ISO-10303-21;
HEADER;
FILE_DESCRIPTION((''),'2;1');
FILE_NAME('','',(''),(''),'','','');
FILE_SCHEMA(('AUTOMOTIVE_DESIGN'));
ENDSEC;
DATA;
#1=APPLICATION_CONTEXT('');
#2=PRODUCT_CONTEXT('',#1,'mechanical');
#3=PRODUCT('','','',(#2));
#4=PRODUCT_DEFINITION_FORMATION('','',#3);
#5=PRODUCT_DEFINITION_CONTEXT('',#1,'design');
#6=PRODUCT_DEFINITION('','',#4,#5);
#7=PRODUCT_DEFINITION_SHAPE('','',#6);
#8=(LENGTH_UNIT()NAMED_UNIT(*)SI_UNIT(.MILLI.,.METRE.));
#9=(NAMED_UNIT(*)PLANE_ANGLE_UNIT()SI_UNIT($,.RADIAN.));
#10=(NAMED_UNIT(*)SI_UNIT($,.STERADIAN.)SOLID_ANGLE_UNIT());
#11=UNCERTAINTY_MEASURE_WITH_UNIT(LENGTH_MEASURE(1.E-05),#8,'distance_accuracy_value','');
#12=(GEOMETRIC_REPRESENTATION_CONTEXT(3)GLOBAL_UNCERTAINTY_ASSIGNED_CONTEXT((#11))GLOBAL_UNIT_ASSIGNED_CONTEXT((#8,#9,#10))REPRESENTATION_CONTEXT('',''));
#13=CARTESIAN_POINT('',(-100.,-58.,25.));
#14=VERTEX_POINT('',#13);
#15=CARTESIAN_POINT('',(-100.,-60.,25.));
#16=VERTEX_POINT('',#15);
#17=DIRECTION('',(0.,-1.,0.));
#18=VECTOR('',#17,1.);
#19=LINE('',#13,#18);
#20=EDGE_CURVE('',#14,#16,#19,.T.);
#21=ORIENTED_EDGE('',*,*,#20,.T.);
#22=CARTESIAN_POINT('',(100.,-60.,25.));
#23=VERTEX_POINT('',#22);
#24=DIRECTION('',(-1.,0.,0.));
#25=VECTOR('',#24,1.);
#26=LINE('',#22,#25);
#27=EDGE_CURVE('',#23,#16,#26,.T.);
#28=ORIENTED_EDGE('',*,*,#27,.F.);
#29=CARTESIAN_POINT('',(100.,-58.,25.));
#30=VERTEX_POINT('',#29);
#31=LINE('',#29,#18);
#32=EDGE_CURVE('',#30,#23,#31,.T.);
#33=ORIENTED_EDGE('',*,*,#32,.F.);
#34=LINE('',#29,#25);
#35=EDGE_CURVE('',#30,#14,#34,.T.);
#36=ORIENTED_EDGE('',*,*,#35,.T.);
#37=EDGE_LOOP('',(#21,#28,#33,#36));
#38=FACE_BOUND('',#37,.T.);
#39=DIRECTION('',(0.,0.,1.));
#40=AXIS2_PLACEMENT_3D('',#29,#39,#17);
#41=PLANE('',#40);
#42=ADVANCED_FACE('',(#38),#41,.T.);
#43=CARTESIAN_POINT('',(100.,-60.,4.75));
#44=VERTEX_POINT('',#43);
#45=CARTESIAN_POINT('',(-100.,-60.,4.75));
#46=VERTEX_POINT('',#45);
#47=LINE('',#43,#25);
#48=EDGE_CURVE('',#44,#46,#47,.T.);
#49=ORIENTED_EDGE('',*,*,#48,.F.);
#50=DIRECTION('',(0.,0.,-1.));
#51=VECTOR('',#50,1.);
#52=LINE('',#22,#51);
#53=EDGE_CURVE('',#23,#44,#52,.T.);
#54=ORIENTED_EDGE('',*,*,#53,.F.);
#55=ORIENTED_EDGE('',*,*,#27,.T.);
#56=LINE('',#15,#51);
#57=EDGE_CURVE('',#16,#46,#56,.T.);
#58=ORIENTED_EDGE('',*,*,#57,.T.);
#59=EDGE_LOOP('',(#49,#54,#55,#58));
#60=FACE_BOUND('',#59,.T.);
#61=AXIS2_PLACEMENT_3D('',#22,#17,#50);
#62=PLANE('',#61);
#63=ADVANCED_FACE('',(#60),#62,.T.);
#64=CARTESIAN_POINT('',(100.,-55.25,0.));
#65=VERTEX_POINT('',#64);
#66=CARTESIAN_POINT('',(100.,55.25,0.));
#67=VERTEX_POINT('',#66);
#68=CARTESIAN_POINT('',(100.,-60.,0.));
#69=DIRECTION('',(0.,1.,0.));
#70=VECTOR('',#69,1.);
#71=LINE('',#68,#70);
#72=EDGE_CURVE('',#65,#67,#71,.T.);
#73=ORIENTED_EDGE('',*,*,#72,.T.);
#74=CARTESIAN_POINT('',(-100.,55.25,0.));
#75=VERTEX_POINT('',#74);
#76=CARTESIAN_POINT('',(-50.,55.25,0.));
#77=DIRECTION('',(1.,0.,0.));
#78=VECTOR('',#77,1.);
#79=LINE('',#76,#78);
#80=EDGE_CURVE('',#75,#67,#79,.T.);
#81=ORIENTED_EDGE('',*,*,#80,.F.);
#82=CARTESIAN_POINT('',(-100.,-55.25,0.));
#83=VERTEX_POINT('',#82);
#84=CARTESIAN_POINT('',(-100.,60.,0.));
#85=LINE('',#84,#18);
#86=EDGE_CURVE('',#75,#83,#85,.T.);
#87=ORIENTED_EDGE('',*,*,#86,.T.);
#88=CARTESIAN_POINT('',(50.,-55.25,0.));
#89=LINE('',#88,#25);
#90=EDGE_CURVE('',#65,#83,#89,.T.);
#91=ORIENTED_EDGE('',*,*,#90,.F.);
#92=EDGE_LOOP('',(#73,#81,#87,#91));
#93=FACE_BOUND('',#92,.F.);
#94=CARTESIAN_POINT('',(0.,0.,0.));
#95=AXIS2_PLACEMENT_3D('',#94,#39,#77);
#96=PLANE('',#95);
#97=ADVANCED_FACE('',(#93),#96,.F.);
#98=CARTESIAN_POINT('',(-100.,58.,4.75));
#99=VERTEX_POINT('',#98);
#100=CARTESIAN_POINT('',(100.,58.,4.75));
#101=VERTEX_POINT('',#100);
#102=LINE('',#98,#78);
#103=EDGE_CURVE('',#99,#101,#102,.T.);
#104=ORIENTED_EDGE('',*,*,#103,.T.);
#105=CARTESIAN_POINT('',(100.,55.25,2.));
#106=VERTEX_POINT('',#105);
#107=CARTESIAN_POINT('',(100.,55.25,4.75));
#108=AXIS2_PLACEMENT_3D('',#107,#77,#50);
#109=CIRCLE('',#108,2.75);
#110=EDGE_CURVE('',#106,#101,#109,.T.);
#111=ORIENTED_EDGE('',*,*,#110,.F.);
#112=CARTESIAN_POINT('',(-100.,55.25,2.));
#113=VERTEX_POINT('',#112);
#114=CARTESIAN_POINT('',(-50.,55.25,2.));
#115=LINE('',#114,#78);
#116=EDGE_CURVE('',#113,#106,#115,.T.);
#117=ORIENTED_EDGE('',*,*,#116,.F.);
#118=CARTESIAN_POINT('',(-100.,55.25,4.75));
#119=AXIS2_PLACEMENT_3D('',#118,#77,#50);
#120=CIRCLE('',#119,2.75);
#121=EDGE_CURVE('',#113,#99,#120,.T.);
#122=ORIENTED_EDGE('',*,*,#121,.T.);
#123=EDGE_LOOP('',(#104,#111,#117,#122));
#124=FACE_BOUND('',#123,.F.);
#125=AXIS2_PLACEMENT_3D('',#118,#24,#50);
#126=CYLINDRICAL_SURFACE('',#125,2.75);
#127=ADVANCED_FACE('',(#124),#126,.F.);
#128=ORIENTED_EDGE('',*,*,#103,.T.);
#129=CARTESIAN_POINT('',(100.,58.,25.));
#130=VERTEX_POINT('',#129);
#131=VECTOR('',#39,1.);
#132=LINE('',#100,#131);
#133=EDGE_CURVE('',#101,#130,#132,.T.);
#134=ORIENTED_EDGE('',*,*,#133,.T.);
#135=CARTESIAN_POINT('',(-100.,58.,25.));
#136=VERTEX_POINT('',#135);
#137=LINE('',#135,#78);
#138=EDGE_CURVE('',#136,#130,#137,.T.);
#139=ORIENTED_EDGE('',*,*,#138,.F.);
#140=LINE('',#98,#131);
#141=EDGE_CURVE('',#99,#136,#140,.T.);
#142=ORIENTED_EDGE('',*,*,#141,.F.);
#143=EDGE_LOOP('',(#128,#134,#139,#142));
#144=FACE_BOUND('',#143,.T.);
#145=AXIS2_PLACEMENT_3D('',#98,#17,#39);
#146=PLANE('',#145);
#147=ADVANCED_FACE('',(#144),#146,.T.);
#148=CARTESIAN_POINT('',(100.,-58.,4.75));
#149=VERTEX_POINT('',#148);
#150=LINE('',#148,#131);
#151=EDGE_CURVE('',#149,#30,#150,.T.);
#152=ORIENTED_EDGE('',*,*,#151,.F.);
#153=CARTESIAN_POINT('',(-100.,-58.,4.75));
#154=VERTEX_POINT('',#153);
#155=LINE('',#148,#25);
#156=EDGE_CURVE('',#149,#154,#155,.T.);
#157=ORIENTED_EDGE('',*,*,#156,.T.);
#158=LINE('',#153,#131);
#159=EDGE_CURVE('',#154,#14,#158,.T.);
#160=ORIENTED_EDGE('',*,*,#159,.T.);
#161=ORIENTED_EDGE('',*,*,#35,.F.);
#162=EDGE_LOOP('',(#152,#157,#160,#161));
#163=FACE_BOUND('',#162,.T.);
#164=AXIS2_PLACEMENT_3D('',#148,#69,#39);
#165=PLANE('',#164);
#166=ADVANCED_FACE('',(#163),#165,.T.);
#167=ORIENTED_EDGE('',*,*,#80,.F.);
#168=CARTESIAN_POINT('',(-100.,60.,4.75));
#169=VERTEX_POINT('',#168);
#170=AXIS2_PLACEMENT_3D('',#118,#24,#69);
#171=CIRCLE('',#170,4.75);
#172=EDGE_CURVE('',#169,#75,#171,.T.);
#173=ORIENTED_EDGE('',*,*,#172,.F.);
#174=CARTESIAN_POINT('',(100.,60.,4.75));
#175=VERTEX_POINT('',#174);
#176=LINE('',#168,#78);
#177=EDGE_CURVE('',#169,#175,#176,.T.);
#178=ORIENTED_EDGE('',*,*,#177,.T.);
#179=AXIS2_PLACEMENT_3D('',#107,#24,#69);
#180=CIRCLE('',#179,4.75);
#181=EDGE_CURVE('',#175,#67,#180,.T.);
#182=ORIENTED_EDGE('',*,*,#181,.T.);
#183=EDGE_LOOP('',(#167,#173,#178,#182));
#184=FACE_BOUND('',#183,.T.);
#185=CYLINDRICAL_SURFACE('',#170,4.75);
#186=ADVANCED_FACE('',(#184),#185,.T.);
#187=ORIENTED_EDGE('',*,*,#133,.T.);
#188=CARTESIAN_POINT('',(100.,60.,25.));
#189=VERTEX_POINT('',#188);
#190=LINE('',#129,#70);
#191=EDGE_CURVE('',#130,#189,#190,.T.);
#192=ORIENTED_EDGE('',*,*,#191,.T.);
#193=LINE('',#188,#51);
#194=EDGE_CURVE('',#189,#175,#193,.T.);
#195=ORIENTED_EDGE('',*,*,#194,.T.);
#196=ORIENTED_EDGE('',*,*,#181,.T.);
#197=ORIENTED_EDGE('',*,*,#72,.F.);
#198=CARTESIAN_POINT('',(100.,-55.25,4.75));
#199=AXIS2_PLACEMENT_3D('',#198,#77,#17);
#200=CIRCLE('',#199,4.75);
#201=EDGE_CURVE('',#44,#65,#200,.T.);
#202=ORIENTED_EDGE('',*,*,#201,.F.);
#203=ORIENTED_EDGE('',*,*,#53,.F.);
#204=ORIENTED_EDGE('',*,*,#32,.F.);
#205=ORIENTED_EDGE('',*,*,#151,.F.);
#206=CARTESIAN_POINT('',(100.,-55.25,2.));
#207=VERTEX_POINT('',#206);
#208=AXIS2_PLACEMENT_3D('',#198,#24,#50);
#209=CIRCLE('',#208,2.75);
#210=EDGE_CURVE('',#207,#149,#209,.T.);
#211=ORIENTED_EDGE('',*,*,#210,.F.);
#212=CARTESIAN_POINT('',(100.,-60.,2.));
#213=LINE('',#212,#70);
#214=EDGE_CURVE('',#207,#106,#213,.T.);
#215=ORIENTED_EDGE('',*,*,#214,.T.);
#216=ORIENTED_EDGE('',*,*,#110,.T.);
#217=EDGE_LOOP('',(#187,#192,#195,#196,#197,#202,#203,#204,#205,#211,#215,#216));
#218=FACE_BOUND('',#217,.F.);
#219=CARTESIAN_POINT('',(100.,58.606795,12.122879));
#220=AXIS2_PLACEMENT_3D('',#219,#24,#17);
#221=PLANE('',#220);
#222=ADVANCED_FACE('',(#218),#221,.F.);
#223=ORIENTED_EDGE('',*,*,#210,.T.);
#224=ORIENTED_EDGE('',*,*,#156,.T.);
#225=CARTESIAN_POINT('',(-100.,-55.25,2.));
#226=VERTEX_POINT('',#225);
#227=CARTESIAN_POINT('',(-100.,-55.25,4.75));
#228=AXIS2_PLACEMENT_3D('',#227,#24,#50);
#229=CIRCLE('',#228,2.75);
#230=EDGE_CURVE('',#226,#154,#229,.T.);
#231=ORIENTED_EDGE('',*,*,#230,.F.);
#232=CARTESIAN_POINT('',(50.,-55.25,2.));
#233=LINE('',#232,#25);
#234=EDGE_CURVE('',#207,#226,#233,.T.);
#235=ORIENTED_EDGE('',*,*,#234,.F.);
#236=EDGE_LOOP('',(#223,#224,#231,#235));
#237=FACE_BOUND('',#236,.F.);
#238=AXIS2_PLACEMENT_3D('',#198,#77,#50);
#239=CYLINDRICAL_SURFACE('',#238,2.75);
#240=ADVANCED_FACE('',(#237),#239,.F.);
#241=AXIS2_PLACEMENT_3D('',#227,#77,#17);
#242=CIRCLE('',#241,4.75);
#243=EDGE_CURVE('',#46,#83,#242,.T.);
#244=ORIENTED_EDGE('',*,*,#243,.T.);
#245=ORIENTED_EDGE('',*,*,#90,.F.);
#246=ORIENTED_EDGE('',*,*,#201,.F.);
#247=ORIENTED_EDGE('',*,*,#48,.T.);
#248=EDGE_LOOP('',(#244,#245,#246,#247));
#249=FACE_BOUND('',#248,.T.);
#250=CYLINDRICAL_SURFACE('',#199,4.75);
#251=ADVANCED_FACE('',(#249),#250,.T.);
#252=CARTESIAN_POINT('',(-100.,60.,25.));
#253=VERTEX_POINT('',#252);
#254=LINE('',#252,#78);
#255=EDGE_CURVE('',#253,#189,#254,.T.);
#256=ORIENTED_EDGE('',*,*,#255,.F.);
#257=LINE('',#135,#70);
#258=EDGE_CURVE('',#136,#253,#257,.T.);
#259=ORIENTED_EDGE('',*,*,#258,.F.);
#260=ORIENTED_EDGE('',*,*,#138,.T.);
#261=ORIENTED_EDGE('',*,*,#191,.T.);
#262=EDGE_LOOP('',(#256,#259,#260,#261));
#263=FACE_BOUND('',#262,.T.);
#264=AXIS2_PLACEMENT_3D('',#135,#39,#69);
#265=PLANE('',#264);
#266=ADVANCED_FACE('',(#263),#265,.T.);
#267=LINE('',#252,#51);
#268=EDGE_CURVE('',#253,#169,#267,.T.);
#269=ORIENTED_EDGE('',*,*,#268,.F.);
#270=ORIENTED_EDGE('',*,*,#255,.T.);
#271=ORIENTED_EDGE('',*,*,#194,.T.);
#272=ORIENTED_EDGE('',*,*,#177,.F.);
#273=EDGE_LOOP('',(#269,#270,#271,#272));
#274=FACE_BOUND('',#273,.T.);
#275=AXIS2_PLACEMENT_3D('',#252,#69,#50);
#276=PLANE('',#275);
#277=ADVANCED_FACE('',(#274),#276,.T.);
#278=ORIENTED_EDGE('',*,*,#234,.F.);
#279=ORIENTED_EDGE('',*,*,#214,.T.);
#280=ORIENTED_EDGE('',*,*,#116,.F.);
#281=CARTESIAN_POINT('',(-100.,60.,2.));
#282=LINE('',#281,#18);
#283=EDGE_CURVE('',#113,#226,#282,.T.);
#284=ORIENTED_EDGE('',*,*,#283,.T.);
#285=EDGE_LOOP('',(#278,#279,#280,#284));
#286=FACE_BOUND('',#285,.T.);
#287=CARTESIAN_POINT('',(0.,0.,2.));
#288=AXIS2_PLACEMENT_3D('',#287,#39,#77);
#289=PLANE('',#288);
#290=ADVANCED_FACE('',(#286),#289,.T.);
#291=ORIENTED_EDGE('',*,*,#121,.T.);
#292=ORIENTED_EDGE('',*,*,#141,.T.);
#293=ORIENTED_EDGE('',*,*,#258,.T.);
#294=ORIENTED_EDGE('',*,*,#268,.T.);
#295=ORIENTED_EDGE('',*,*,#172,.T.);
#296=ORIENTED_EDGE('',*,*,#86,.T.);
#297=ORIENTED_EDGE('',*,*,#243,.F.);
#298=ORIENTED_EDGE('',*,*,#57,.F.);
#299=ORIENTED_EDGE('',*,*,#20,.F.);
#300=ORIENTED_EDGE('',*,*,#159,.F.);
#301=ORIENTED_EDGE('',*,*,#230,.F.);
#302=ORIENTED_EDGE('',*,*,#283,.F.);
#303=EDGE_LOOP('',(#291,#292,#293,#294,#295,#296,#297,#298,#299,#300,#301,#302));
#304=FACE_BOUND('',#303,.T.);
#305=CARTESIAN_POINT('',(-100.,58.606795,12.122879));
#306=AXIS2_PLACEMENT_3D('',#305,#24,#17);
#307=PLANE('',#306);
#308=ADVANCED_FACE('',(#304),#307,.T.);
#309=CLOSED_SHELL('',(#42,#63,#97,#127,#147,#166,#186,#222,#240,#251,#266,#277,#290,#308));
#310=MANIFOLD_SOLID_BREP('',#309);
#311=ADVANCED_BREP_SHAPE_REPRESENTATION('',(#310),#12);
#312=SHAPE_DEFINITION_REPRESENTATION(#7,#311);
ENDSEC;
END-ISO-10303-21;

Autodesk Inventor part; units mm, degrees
ref_plane "YZ Plane" through (0, 0, 0) normal (1, 0, 0) x (0, 1, 0)
ref_plane "XZ Plane" through (0, 0, 0) normal (0, 1, 0) x (-1, 0, 0)
ref_plane "XY Plane" through (0, 0, 0) normal (0, 0, 1) x (1, 0, 0)
sketch "Sketch1" plane through (0, 0, 0) normal (0, 0, 1) x (1, 0, 0)
  line L0 (-100, -60) -> (100, -60)
  line L1 (100, -60) -> (100, 60)
  line L2 (100, 60) -> (-100, 60)
  line L3 (-100, 60) -> (-100, -60)
  line L4 (-100, -60) -> (100, 60) construction
  line L5 (100, -60) -> (-100, 60) construction
  point P0 (0, 0)
  dimension "d0" = 200
  dimension "d1" = 120
extrude "Plate1" add sketch "Sketch1" along normal blind 2
sketch "Sketch2" plane through (0, 0, 0) normal (0, 0, -1) x (-1, 0, 0)
  line L0 (-80, 40) -> (120, 40) construction
  line L1 (120, 40) -> (120, 20) construction
  line L2 (120, 20) -> (-80, 20) construction
  line L3 (-80, 20) -> (-80, 40) construction
  line L4 (-100, 60) -> (100, 60) projected
  line L5 (-100, -60) -> (-100, 60) projected
  point P0 (0, 0)
  point P1 (-48, 100)
  point P2 (-50, 98)
  dimension "d6" = 200
  dimension "d9" = 20
  dimension "d10" = 20
  dimension "d11" = 20
mark "Mark1"
sketch "Sketch3" plane through (100, 58, 0) normal (0, 1, 0) x (-1, 0, 0)
  line L0 (200, 0) -> (0, 0)
  line L1 (0, 0) -> (0, -25)
  line L2 (0, -25) -> (200, -25)
  line L3 (200, -25) -> (200, 0)
edge flange "Flange1" height 25 angle 90 thickness 2 bend radius 2.75 thickness toward (0, 1, 0) relief round relief width 2 relief depth 1 corner gap 2.75 corner form 0 edges at (0, 60, 0) (0, -60, 0) wall of the first edge with corners at (-100, 58, 0) (100, 58, 0) (100, 58, 25) (-100, 58, 25)
bend "Bend1"
corner "Corner1"
equation "\"d2\" = Thickness"
equation "\"d12\" = BendReliefWidth"
equation "\"d13\" = BendReliefDepth"
equation "\"d14\" = MinimumRemnant"
equation "\"d15\" = TransitionRadius"
equation "\"d18\" = BendRadius"
equation "\"d19\" = CornerReliefSize"
equation "\"d20\" = GapSize"
equation "\"d21\" = JacobiRadiusSize"
equation "\"BendReliefWidth\" = Thickness"
equation "\"BendReliefDepth\" = 0.5 * Thickness"
equation "\"CornerReliefSize\" = 4 * Thickness"
equation "\"MinimumRemnant\" = 2 * Thickness"
equation "\"TransitionRadius\" = BendRadius"
equation "\"JacobiRadiusSize\" = BendRadius"
equation "\"GapSize\" = Thickness"
equation "\"Thickness\" = 2"
equation "\"BendRadius\" = 2.75"
properties part number "TRM 037 box 2" material "AISI 304"
